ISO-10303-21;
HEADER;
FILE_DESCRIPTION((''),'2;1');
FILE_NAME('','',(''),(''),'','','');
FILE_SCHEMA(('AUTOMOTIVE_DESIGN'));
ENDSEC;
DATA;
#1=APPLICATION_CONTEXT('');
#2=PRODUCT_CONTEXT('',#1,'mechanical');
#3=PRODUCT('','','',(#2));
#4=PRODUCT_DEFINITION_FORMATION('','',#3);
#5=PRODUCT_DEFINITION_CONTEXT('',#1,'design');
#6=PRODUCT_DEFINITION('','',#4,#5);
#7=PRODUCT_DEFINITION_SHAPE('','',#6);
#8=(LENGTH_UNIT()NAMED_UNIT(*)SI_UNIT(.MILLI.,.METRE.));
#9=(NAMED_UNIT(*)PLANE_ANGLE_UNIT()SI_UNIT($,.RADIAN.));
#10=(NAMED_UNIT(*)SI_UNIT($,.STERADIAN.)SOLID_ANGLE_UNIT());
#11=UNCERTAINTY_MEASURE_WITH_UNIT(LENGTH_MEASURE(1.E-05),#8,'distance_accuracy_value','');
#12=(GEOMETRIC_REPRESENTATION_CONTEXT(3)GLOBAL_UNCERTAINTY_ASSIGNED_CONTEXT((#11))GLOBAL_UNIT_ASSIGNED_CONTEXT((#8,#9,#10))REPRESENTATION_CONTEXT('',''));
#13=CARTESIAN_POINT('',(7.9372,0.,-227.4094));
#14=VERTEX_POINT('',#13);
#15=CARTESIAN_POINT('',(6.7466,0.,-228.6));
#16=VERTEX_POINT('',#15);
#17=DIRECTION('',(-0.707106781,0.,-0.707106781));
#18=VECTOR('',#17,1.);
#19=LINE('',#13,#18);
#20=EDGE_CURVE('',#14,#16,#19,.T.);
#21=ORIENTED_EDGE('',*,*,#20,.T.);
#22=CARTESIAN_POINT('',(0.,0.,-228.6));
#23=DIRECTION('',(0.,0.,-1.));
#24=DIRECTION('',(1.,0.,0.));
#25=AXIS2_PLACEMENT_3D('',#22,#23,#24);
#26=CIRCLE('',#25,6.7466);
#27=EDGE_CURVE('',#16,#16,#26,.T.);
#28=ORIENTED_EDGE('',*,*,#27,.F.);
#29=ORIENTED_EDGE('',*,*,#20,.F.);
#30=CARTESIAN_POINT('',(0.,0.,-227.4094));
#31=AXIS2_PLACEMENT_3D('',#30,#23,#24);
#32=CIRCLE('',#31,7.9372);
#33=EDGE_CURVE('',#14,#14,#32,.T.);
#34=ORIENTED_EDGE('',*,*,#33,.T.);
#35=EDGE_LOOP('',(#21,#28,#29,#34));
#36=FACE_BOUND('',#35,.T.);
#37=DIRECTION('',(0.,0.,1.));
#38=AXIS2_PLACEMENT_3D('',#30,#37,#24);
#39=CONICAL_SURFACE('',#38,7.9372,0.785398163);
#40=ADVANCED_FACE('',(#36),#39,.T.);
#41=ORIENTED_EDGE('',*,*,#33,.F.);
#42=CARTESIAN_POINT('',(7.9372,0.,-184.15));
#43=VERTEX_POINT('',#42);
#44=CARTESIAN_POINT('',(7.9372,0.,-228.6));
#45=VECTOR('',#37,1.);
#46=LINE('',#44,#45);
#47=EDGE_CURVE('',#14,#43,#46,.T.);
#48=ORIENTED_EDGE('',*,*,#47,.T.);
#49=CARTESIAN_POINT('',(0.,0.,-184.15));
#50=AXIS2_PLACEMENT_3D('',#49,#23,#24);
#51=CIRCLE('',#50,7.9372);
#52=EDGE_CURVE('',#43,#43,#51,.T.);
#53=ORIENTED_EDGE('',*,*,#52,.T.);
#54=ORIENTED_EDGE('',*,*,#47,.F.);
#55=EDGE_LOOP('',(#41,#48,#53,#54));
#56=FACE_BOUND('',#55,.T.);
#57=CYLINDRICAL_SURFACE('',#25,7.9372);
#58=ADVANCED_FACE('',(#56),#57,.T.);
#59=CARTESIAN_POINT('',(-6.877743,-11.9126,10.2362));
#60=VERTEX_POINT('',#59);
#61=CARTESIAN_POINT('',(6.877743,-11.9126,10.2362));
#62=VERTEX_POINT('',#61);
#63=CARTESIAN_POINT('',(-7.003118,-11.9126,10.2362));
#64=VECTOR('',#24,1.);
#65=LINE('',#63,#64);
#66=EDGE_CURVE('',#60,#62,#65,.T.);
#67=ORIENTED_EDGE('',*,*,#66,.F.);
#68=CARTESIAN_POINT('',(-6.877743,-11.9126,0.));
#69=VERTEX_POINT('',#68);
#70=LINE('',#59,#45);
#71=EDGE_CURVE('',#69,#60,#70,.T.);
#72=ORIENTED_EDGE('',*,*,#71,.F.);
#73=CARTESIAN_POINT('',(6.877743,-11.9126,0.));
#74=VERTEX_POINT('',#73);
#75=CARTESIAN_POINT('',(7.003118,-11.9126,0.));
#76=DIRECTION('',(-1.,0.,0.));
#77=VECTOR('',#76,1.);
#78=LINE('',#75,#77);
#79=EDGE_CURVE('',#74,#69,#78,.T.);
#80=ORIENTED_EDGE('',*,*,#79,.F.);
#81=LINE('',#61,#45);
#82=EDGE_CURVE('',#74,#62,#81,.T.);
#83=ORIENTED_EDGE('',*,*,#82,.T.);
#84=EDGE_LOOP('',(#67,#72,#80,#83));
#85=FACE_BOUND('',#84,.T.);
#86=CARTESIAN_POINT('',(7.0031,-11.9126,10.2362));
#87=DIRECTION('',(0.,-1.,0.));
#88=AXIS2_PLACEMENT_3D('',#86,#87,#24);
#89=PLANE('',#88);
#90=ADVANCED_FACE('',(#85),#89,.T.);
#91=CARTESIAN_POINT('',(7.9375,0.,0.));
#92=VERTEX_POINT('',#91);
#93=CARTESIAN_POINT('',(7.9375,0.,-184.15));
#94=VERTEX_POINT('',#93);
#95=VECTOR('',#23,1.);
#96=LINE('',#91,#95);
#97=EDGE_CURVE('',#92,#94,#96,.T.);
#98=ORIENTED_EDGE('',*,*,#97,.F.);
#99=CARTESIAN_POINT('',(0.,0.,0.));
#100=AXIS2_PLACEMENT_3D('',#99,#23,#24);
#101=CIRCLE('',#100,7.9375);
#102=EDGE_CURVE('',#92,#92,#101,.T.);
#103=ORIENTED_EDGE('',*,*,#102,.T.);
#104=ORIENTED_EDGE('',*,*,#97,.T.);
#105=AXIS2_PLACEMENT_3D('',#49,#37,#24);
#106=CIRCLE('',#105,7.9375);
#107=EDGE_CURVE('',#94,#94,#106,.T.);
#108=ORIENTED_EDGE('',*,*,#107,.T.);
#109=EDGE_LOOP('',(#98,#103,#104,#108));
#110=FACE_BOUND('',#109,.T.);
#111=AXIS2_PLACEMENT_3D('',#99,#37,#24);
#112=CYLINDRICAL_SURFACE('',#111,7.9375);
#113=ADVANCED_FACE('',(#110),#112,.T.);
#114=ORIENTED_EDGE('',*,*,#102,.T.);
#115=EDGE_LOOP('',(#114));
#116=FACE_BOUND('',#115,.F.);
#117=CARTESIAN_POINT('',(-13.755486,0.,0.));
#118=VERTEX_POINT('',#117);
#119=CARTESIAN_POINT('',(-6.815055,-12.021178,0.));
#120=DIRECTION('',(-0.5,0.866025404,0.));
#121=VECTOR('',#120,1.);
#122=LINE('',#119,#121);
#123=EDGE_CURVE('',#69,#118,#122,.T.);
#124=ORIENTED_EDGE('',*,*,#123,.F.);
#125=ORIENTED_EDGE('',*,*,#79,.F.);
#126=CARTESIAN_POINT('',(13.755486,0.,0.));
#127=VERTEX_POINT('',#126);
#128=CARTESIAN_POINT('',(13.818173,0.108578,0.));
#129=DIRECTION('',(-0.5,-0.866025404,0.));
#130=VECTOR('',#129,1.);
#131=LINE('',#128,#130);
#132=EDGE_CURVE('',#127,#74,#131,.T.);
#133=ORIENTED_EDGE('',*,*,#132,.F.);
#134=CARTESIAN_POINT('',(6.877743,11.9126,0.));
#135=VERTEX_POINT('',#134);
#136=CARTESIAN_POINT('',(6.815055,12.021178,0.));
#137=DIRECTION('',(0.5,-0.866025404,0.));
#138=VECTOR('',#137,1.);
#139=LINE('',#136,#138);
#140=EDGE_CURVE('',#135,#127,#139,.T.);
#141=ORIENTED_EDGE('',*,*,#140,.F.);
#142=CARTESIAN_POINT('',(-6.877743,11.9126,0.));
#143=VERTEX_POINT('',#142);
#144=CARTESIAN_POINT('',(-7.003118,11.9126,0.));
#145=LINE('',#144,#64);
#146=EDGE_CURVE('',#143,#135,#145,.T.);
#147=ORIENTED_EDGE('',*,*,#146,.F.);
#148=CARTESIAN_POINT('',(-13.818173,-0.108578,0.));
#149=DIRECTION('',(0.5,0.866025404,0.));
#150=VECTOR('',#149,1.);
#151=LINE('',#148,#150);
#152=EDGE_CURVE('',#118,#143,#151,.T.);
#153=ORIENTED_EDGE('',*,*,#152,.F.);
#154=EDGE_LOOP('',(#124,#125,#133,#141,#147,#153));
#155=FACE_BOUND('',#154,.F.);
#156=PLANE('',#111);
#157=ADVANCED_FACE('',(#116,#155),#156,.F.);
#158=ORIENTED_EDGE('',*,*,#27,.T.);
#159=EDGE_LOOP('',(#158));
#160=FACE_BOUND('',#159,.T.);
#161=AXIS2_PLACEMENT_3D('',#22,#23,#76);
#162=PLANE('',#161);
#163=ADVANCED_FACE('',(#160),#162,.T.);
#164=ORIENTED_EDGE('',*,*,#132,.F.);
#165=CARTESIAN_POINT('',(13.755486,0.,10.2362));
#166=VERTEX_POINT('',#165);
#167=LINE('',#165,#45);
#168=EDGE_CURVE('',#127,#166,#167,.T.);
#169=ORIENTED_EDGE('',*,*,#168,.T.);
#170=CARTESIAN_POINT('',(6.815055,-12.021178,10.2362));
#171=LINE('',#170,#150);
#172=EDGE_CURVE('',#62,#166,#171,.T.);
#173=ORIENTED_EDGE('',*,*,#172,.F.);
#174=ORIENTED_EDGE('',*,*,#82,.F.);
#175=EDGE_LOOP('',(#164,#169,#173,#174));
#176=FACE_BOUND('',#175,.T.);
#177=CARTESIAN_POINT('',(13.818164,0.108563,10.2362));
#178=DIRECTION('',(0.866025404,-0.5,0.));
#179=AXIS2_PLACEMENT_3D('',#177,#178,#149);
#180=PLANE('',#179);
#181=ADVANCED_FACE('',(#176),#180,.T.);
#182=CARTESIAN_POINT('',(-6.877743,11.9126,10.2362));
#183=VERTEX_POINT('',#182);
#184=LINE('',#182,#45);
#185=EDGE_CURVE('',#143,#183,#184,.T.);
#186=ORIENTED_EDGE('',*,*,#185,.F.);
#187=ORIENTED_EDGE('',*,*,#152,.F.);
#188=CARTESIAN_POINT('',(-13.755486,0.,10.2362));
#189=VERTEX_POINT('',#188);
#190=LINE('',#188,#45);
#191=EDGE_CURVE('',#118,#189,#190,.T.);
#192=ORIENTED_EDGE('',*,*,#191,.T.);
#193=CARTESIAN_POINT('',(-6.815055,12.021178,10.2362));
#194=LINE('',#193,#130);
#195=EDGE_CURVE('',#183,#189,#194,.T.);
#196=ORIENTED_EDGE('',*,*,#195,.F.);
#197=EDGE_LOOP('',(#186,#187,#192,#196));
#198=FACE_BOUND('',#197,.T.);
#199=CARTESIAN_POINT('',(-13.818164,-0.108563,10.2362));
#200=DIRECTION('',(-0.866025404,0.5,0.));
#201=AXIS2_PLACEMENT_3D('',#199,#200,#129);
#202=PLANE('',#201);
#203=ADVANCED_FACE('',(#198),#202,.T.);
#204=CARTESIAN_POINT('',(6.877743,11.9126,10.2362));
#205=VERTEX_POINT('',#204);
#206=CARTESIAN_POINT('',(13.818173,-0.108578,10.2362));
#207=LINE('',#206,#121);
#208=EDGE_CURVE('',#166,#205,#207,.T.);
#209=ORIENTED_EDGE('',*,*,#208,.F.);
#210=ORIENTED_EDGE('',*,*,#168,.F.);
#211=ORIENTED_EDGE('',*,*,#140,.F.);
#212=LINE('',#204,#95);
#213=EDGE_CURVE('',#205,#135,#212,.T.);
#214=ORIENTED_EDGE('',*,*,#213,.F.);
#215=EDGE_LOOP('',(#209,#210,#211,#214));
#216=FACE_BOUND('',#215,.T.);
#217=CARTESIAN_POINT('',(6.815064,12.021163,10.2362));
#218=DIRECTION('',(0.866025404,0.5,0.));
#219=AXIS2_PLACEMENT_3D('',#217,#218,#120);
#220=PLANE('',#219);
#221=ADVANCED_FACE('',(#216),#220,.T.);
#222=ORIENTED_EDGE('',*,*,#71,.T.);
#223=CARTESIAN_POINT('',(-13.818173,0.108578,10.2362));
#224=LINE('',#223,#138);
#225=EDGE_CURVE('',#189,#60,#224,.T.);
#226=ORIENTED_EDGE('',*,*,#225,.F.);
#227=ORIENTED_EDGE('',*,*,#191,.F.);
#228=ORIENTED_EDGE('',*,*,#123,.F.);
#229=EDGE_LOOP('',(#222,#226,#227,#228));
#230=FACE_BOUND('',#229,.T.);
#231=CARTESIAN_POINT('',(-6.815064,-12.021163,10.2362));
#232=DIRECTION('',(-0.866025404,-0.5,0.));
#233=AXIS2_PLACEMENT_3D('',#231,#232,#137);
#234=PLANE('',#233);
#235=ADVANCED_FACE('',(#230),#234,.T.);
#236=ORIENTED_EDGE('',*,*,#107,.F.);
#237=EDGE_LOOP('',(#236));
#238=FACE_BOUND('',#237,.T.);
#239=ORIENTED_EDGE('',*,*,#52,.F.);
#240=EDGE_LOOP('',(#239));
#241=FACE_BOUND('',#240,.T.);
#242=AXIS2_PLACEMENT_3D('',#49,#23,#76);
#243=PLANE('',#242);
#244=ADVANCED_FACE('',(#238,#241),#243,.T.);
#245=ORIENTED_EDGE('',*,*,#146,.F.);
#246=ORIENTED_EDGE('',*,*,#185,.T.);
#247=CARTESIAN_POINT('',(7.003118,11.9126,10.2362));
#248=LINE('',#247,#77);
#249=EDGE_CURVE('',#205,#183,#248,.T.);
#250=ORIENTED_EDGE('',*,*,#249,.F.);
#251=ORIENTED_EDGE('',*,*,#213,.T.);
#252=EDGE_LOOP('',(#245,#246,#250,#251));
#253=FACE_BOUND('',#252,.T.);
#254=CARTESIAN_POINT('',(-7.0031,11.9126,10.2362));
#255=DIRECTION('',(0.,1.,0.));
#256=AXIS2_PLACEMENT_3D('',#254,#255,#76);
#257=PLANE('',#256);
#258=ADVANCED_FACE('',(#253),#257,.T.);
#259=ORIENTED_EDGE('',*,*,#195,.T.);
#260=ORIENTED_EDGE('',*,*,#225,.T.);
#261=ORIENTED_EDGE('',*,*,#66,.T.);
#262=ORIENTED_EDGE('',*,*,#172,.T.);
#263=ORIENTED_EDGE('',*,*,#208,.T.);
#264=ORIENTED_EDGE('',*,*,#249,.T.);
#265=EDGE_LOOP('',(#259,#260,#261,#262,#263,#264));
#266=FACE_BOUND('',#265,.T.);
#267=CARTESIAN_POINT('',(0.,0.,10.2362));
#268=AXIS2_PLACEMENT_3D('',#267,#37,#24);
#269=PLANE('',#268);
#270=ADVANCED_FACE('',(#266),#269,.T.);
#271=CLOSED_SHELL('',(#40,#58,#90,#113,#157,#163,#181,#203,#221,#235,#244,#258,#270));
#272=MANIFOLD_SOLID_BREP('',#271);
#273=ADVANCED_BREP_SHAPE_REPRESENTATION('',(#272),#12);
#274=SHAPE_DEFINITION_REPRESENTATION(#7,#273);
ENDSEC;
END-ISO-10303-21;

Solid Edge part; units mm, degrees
sketch "Sketch1" plane through (0, 0, 0) normal (0, 0, 1) x (1, 0, 0)
  circle A0 centre (0, 0) radius 13.8186
  dimension "D1" = 27.6372
extrude "Protrusion1" add sketch "Sketch1" along normal blind 10.2362
sketch "Sketch2" plane through (0, 0, 0) normal (0, 0, -1) x (1, 0, 0)
  circle A0 centre (0, 0) radius 7.9375
extrude "Protrusion2" add sketch "Sketch2" along normal blind 228.6
sketch "Sketch3" plane through (0, 0, -228.6) normal (0, 0, -1) x (1, 0, 0)
  circle A0 centre (0, 0) radius 7.9372
extrude "Cutout1" cut sketch "Sketch3" against normal blind 44.45 flip side to cut
chamfer "Chamfer_1" distance 1.1906 angle 45 1 edges at (-7.9372, 0, -228.6)
sketch "Sketch4" plane through (0, 0, 10.2362) normal (0, 0, 1) x (1, 0, 0)
  line L0 (-7.0031, 11.9126) -> (7.0031, 11.9126)
  dimension "D1" = 23.8252
extrude "Cutout2" cut sketch "Sketch4" against normal up to next material side at (0, 11.9626, 10.2362)
pattern_circular "Pattern1" count 6 over 360 about axis through (0, 0, 10.2362) along (0, 0, 1) of "Cutout2"
properties part number "113694"
